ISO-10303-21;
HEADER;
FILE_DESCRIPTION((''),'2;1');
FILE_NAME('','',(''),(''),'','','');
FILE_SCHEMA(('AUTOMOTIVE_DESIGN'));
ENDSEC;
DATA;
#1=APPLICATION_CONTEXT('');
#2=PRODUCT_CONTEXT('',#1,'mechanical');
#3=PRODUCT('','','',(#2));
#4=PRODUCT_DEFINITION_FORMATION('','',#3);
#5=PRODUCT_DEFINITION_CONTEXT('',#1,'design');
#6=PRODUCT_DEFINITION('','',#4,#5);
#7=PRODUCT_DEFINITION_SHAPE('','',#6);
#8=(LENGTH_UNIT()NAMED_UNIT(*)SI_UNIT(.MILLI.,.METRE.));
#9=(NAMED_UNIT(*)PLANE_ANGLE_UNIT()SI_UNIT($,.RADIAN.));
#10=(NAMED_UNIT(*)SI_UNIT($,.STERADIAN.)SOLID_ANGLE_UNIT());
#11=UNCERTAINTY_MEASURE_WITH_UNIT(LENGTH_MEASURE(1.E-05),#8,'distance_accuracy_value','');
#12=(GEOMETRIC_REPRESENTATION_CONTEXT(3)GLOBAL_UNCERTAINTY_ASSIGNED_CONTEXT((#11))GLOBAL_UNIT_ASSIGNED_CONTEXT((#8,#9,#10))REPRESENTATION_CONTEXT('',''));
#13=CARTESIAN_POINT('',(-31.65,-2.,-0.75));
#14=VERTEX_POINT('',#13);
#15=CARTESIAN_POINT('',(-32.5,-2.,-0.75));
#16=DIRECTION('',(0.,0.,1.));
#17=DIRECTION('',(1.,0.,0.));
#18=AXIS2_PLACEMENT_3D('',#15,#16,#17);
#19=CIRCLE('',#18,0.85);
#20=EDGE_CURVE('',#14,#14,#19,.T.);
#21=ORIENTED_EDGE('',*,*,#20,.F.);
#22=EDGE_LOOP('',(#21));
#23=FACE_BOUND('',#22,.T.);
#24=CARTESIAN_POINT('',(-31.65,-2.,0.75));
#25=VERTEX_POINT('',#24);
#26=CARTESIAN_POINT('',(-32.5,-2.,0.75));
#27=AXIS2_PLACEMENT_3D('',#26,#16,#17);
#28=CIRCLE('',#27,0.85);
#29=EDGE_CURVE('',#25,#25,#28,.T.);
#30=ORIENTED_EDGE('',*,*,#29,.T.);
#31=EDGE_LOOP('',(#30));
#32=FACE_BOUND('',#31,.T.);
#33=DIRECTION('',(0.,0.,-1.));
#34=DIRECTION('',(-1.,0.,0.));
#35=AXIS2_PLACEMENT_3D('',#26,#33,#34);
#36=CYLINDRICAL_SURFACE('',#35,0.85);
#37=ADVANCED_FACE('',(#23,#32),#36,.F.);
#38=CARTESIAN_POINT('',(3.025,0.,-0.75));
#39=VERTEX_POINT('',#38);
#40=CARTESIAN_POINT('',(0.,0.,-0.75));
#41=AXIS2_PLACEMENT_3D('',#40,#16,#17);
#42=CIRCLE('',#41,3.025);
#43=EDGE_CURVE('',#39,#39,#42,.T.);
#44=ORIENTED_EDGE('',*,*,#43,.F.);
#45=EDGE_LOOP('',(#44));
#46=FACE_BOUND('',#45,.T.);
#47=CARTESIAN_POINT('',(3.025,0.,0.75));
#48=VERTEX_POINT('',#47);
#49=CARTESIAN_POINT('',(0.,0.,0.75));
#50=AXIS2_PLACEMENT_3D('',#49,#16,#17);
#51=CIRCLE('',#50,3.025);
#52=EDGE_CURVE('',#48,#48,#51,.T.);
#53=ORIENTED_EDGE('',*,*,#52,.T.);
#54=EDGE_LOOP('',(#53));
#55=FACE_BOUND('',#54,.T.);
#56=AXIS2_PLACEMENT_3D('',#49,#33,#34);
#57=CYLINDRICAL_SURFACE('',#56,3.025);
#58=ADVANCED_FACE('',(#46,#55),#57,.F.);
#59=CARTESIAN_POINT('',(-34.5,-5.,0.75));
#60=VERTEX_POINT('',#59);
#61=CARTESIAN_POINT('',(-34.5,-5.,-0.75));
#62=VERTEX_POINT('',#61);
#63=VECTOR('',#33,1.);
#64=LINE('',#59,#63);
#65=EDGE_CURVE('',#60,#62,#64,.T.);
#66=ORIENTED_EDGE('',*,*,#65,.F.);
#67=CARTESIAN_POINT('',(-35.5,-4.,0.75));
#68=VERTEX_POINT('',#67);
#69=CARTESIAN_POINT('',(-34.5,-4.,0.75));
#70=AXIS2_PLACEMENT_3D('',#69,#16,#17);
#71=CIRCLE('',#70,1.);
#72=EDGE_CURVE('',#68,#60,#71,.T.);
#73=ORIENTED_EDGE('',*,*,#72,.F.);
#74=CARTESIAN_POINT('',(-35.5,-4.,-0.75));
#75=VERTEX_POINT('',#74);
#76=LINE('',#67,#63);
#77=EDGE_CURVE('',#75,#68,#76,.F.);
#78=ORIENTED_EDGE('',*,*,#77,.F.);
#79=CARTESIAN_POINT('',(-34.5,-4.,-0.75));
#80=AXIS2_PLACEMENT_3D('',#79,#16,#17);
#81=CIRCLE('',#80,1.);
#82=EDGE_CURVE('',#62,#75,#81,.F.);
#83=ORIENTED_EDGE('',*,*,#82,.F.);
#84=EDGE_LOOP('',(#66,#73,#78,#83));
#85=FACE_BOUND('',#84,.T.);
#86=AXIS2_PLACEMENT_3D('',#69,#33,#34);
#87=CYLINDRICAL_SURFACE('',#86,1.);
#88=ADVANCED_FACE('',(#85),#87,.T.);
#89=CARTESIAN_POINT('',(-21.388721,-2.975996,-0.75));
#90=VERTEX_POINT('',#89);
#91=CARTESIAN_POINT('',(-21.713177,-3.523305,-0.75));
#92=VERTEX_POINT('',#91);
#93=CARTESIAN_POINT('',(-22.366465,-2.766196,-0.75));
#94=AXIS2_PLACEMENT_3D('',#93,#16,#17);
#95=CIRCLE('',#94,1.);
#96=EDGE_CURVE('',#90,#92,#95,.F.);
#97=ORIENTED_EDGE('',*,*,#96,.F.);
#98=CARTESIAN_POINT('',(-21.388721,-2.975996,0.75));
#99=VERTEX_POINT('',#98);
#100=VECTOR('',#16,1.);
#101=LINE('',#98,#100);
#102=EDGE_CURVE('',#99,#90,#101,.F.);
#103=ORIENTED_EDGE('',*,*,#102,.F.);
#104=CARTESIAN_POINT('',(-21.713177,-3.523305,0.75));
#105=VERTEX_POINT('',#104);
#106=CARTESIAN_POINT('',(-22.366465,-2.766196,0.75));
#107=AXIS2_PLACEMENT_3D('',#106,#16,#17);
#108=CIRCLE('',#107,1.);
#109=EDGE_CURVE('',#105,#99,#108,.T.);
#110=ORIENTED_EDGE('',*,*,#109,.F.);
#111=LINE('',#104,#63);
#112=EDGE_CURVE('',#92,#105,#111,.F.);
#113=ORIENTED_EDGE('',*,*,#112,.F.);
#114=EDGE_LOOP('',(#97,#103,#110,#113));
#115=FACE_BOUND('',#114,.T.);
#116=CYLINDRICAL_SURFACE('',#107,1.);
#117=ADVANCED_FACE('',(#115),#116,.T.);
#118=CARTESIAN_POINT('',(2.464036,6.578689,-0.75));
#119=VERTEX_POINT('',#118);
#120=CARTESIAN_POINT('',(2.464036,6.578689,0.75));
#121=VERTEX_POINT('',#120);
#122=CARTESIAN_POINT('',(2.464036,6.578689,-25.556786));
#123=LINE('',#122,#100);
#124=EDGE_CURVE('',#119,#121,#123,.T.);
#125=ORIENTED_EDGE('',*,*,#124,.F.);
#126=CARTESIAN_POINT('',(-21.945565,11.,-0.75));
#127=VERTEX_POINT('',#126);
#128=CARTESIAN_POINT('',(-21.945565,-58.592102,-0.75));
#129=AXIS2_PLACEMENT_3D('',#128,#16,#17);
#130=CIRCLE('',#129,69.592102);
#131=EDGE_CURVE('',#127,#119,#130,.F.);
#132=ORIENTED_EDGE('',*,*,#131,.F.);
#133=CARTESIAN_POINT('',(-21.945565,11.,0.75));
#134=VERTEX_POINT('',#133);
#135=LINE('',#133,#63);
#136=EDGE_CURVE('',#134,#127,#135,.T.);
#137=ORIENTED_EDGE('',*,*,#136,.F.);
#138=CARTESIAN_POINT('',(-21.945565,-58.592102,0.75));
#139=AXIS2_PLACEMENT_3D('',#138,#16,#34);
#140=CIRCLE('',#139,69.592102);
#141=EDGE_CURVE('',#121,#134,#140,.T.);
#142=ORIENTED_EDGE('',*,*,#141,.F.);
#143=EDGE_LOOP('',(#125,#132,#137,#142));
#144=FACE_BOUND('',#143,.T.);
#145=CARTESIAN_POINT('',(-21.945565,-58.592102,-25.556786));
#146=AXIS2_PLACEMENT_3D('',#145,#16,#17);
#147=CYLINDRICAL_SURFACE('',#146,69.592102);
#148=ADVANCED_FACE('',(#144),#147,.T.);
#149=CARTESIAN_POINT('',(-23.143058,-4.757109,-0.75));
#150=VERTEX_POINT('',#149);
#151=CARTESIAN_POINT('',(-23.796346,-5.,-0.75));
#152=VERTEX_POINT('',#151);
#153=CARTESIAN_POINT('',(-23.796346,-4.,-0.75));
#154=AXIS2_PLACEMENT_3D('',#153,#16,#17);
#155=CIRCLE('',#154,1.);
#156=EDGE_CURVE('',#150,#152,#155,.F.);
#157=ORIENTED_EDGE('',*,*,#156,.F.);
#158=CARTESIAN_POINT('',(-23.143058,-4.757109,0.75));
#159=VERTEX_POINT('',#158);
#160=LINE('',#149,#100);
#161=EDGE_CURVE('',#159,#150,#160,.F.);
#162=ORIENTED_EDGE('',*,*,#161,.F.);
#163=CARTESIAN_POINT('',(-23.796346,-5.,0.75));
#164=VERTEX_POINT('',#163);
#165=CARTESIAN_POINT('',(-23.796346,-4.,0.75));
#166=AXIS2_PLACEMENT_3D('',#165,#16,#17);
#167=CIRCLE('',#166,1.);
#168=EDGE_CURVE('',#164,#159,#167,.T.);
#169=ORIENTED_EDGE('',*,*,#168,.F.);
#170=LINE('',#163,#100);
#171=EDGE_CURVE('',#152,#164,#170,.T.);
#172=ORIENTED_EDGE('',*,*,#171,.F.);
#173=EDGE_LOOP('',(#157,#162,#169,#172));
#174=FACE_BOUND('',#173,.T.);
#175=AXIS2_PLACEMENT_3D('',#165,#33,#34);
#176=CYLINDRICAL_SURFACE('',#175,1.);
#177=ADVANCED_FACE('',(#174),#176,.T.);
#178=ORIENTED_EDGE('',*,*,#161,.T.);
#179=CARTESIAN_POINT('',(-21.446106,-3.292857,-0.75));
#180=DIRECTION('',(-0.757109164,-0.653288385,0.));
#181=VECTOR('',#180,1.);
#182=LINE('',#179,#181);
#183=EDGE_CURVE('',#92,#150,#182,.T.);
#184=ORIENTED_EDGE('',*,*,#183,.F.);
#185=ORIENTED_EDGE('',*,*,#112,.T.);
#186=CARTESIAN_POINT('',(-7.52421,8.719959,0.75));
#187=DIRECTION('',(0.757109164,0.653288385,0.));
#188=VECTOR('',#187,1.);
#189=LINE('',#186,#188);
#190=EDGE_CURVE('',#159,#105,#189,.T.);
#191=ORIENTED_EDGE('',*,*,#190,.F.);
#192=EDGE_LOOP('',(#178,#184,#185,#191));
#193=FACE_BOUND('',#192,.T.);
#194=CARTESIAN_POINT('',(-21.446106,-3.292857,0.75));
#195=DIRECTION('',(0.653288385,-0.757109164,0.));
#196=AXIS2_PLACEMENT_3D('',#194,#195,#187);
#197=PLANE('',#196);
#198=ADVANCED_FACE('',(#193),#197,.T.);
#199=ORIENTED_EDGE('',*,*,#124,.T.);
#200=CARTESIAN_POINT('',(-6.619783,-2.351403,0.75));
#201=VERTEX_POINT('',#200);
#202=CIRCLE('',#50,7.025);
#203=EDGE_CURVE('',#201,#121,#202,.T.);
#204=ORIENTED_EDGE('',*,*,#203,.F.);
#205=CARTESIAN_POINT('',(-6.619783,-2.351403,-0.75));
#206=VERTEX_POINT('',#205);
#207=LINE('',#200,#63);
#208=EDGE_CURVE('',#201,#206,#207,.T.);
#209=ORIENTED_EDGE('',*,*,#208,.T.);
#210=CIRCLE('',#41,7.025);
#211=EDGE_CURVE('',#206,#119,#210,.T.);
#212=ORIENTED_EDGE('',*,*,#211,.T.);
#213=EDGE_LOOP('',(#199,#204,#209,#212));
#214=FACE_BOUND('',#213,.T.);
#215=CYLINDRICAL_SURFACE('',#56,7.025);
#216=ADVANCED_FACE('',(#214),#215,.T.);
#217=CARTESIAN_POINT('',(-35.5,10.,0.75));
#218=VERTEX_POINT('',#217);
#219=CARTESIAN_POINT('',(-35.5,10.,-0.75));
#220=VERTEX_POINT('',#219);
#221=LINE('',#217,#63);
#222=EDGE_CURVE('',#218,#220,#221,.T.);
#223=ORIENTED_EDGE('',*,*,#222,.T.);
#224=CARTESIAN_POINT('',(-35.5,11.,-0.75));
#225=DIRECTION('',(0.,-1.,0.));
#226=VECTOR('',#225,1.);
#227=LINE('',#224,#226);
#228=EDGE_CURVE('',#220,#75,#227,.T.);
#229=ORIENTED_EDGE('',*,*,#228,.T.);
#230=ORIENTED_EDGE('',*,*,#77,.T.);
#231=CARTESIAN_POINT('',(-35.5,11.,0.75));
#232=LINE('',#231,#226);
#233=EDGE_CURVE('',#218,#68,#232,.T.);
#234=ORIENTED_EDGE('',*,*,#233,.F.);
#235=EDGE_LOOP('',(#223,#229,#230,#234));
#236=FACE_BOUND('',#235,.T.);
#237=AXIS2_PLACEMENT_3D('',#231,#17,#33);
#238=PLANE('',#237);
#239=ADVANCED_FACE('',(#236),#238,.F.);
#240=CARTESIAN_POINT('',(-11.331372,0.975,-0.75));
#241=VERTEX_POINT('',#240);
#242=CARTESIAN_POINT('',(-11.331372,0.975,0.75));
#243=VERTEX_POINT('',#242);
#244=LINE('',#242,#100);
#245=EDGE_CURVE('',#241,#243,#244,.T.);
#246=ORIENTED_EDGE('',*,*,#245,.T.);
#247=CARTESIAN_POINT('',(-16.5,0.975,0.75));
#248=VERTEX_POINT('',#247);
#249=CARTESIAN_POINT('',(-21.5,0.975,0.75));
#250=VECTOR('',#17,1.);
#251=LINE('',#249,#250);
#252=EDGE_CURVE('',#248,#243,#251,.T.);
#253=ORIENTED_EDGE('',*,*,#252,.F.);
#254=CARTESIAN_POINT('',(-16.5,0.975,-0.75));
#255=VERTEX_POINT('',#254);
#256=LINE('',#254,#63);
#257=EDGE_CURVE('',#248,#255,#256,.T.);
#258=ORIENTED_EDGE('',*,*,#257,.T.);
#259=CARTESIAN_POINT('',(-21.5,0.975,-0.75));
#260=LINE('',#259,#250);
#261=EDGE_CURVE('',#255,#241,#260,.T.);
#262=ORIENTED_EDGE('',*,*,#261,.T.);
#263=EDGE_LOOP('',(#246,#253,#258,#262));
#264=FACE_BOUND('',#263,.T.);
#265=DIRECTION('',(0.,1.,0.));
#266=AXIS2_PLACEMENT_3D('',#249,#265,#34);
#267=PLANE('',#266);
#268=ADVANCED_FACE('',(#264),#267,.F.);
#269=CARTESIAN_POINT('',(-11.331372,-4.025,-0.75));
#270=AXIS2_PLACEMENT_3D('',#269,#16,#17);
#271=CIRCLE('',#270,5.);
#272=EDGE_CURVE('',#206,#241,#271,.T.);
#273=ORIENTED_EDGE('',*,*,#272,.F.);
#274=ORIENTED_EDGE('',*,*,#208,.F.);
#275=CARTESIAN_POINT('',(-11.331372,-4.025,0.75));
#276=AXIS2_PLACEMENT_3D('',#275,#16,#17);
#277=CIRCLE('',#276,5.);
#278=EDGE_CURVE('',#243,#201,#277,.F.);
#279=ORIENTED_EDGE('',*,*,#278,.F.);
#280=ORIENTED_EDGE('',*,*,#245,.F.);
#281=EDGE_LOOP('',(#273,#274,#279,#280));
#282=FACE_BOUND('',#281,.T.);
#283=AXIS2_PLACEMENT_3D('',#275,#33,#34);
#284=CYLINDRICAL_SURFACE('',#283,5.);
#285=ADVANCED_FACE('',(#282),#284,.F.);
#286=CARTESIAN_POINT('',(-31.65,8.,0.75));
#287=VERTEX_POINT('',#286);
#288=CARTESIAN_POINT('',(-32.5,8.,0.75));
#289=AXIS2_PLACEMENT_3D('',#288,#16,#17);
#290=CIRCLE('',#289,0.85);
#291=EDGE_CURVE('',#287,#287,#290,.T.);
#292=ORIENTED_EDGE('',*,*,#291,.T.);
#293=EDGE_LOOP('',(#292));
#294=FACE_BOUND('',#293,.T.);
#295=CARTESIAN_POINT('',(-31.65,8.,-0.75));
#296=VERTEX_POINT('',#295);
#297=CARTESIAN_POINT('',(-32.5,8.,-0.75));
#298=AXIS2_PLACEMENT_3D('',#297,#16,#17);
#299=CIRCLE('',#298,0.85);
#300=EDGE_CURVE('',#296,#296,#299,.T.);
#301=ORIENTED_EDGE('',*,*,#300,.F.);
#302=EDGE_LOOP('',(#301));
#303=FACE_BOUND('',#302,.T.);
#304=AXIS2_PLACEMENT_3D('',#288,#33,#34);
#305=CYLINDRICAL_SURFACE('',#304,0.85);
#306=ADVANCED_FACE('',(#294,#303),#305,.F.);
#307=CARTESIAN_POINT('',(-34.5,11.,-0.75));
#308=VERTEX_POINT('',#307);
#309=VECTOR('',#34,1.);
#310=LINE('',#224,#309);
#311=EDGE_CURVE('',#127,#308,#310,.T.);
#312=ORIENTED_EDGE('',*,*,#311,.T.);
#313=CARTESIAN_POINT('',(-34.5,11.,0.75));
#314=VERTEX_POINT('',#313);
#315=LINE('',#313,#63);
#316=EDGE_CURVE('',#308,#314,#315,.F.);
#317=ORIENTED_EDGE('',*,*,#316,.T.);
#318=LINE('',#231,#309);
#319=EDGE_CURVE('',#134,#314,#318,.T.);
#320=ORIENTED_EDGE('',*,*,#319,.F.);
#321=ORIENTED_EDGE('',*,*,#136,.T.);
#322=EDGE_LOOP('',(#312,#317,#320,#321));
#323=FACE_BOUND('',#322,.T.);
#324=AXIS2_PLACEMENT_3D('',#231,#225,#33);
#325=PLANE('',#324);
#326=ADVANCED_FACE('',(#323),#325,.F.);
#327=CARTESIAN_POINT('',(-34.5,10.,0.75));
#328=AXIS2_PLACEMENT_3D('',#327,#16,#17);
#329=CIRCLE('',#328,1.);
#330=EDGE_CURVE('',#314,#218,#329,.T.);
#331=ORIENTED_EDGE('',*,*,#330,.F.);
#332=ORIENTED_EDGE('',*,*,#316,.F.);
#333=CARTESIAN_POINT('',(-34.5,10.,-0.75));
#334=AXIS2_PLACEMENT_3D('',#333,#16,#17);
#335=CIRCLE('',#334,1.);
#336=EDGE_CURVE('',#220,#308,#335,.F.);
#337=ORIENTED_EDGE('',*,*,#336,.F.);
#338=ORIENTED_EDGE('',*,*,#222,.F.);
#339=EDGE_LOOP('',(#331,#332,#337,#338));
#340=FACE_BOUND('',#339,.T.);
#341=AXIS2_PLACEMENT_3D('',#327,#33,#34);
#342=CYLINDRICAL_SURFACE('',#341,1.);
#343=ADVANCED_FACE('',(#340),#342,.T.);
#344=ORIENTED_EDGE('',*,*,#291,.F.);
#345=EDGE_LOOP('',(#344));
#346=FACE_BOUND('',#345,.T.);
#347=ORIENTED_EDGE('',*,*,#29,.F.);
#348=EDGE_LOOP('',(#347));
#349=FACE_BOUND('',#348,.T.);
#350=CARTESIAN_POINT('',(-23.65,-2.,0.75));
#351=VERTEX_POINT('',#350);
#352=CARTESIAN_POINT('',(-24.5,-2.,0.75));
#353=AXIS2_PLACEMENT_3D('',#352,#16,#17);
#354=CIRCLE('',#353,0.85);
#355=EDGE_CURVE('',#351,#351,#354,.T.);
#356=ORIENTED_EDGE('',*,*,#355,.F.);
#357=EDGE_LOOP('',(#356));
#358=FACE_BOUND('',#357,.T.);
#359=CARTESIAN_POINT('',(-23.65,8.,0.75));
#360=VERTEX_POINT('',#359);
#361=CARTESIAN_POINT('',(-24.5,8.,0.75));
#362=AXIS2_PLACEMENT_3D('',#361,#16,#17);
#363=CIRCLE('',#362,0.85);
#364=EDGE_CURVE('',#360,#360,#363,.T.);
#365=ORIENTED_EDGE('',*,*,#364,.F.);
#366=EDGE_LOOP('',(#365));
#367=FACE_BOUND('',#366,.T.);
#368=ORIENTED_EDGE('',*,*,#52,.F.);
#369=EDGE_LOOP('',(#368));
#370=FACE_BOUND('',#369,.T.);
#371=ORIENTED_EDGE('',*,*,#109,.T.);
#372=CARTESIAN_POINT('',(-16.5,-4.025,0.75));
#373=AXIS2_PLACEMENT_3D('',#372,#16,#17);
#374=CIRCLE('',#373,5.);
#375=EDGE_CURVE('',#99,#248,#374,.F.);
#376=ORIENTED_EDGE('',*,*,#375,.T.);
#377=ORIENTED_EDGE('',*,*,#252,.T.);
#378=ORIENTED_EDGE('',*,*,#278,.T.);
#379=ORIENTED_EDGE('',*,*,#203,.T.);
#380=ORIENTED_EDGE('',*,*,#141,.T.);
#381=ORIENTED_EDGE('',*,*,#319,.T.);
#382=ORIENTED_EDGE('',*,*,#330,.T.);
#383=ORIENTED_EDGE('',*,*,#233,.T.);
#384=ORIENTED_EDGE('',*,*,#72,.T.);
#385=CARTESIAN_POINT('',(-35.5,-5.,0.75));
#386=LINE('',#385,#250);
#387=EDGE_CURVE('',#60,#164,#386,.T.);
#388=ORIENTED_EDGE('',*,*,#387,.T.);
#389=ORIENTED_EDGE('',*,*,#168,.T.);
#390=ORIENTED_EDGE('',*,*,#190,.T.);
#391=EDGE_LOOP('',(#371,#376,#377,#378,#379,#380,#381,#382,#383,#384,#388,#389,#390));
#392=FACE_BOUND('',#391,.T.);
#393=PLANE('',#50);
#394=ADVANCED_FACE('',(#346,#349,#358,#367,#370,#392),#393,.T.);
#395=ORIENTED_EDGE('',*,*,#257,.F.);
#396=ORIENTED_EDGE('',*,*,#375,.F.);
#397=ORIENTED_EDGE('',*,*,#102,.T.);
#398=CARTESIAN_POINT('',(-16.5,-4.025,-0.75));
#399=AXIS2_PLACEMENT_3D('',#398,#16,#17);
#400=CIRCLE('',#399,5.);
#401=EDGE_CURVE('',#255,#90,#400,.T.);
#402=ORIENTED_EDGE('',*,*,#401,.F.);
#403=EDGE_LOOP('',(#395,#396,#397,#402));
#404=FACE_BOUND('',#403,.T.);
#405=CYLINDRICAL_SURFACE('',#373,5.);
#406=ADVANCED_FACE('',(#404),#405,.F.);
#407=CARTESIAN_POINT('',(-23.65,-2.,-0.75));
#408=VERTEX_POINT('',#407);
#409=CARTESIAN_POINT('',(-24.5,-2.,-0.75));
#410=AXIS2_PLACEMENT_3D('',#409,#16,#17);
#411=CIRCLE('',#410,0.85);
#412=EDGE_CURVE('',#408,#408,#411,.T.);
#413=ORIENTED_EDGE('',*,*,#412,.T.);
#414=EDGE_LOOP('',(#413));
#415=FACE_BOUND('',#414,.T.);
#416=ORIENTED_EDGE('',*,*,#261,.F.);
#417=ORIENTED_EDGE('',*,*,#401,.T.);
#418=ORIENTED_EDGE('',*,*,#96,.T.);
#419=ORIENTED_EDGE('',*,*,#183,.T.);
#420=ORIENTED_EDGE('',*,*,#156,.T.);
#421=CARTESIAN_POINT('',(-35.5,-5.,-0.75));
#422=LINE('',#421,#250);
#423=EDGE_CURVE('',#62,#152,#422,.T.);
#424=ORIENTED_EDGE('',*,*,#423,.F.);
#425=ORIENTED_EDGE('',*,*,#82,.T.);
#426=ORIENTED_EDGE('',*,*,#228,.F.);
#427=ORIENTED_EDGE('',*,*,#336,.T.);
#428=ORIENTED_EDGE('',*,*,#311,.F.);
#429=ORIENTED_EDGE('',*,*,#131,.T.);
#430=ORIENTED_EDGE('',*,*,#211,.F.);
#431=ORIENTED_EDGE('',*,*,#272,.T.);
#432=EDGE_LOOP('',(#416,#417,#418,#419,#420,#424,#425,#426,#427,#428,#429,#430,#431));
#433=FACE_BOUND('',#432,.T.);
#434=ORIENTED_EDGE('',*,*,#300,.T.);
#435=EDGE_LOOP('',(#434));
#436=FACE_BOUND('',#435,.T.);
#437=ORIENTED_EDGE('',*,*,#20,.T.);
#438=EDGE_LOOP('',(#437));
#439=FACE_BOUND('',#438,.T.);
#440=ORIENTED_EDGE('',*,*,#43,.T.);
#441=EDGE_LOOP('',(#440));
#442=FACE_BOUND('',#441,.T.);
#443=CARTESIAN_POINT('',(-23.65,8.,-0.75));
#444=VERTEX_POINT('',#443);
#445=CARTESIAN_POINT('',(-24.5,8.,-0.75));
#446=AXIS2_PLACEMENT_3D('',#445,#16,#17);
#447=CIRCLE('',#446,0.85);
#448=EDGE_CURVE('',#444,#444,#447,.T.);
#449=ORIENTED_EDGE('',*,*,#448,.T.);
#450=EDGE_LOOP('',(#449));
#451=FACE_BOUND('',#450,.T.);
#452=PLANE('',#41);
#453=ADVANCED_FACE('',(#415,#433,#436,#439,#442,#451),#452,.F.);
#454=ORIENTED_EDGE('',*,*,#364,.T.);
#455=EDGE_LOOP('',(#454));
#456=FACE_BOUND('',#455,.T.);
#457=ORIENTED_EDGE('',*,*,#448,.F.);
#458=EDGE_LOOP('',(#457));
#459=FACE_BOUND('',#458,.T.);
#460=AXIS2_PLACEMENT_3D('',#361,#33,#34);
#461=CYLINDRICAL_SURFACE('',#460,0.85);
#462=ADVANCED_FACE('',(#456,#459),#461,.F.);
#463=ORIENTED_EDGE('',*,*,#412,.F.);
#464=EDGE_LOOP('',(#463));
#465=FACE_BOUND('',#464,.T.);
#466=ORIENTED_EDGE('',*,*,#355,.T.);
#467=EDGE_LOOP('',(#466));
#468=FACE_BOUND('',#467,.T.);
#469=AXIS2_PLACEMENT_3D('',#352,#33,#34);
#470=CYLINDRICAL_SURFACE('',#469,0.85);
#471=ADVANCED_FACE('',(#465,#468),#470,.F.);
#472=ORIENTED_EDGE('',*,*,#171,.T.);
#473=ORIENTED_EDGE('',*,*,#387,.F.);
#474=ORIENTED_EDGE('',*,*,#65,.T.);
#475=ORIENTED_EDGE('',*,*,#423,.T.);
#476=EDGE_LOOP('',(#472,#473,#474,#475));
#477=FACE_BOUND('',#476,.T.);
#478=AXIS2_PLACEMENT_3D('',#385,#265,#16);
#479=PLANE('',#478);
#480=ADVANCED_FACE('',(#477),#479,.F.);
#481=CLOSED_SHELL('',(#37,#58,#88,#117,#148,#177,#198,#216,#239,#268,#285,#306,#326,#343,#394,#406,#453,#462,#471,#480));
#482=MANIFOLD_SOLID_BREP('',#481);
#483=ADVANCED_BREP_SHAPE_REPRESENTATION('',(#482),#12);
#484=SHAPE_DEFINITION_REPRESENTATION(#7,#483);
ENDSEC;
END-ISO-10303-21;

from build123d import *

# Parameters (mm, degrees)
ESQUISSE1_R          = 3.025
ESQUISSE1_R_2        = 0.85
BOSS_EXTRU_1_DEPTH   = 0.75
CONG_1_R             = 5
CONG_2_R             = 1
CHANFREIN1_START     = -11.517439791
CHANFREIN1_OUTLINE_W = 6
CHANFREIN1_OUTLINE_H = 4
CHANFREIN1_DEPTH     = 2.517439791
CONG_3_R             = 1
BOSS_EXTRU_2_DEPTH   = 1.5


with BuildPart() as part:
    # Esquisse1 → Boss.-Extru.1 (new, symmetric)
    with BuildSketch(Plane.XY):
        with BuildLine():
            Line((-21.5, 11), (1.242174044, 6.914306086))
            ThreePointArc((1.242174044, 6.914306086), (4.121125954, -5.689195538), (-6.957010852, 0.975))
            Line((-6.957010852, 0.975), (-21.5, 0.975))
            Line((-21.5, 0.975), (-21.5, -5))
            Line((-21.5, -5), (-35.5, -5))
            Line((-35.5, -5), (-35.5, 11))
            Line((-35.5, 11), (-21.5, 11))
        make_face()
        Circle(ESQUISSE1_R, mode=Mode.SUBTRACT)
        with Locations((-32.5, 8)):
            Circle(ESQUISSE1_R_2, mode=Mode.SUBTRACT)
        with Locations((-24.5, 8)):
            Circle(ESQUISSE1_R_2, mode=Mode.SUBTRACT)
        with Locations((-24.5, -2)):
            Circle(ESQUISSE1_R_2, mode=Mode.SUBTRACT)
        with Locations((-32.5, -2)):
            Circle(ESQUISSE1_R_2, mode=Mode.SUBTRACT)
    extrude(amount=BOSS_EXTRU_1_DEPTH, both=True)

    # Congé1
    cong_1_edges = [part.edges().sort_by_distance(p)[0] for p in [
        (-21.5, 11, 0),
        (-6.957010852, 0.975, 0),
        (-21.5, 0.975, 0),
    ]]
    fillet(cong_1_edges, radius=CONG_1_R)

    # Congé2
    cong_2_edges = [part.edges().sort_by_distance(p)[0] for p in [
        (-35.5, 11, 0),
        (-35.5, -5, 0),
    ]]
    fillet(cong_2_edges, radius=CONG_2_R)

    # Chanfrein1: read off the stored shape, not the designer's step
    # Chanfrein1 outline → Chanfrein1 (cut)
    with BuildSketch(Plane(origin=(0, 0, 0), x_dir=(0.7571091636707948, 0.6532883852371091, 0), z_dir=(0.6532883852371091, -0.7571091636707951, 0)).offset(CHANFREIN1_START)):
        with Locations((-20, 0)):
            Rectangle(CHANFREIN1_OUTLINE_W, CHANFREIN1_OUTLINE_H)
    extrude(amount=CHANFREIN1_DEPTH, mode=Mode.SUBTRACT)

    # Congé3
    cong_3_edges = [part.edges().sort_by_distance(p)[0] for p in [
        (-21.44610623, -3.292857143, 0),
        (-23.424548722, -5, 0),
    ]]
    fillet(cong_3_edges, radius=CONG_3_R)

    # Esquisse2 → Boss.-Extru.2 (add)
    with BuildSketch(Plane.XY.offset(0.75)):
        with BuildLine():
            Line((-21.945565237, 11), (2.464036076, 6.578689171))
            ThreePointArc((2.464036076, 6.578689171), (-9.542172297, 9.885752111), (-21.945565237, 11))
        make_face()
    extrude(amount=-BOSS_EXTRU_2_DEPTH)


solid = part.part
